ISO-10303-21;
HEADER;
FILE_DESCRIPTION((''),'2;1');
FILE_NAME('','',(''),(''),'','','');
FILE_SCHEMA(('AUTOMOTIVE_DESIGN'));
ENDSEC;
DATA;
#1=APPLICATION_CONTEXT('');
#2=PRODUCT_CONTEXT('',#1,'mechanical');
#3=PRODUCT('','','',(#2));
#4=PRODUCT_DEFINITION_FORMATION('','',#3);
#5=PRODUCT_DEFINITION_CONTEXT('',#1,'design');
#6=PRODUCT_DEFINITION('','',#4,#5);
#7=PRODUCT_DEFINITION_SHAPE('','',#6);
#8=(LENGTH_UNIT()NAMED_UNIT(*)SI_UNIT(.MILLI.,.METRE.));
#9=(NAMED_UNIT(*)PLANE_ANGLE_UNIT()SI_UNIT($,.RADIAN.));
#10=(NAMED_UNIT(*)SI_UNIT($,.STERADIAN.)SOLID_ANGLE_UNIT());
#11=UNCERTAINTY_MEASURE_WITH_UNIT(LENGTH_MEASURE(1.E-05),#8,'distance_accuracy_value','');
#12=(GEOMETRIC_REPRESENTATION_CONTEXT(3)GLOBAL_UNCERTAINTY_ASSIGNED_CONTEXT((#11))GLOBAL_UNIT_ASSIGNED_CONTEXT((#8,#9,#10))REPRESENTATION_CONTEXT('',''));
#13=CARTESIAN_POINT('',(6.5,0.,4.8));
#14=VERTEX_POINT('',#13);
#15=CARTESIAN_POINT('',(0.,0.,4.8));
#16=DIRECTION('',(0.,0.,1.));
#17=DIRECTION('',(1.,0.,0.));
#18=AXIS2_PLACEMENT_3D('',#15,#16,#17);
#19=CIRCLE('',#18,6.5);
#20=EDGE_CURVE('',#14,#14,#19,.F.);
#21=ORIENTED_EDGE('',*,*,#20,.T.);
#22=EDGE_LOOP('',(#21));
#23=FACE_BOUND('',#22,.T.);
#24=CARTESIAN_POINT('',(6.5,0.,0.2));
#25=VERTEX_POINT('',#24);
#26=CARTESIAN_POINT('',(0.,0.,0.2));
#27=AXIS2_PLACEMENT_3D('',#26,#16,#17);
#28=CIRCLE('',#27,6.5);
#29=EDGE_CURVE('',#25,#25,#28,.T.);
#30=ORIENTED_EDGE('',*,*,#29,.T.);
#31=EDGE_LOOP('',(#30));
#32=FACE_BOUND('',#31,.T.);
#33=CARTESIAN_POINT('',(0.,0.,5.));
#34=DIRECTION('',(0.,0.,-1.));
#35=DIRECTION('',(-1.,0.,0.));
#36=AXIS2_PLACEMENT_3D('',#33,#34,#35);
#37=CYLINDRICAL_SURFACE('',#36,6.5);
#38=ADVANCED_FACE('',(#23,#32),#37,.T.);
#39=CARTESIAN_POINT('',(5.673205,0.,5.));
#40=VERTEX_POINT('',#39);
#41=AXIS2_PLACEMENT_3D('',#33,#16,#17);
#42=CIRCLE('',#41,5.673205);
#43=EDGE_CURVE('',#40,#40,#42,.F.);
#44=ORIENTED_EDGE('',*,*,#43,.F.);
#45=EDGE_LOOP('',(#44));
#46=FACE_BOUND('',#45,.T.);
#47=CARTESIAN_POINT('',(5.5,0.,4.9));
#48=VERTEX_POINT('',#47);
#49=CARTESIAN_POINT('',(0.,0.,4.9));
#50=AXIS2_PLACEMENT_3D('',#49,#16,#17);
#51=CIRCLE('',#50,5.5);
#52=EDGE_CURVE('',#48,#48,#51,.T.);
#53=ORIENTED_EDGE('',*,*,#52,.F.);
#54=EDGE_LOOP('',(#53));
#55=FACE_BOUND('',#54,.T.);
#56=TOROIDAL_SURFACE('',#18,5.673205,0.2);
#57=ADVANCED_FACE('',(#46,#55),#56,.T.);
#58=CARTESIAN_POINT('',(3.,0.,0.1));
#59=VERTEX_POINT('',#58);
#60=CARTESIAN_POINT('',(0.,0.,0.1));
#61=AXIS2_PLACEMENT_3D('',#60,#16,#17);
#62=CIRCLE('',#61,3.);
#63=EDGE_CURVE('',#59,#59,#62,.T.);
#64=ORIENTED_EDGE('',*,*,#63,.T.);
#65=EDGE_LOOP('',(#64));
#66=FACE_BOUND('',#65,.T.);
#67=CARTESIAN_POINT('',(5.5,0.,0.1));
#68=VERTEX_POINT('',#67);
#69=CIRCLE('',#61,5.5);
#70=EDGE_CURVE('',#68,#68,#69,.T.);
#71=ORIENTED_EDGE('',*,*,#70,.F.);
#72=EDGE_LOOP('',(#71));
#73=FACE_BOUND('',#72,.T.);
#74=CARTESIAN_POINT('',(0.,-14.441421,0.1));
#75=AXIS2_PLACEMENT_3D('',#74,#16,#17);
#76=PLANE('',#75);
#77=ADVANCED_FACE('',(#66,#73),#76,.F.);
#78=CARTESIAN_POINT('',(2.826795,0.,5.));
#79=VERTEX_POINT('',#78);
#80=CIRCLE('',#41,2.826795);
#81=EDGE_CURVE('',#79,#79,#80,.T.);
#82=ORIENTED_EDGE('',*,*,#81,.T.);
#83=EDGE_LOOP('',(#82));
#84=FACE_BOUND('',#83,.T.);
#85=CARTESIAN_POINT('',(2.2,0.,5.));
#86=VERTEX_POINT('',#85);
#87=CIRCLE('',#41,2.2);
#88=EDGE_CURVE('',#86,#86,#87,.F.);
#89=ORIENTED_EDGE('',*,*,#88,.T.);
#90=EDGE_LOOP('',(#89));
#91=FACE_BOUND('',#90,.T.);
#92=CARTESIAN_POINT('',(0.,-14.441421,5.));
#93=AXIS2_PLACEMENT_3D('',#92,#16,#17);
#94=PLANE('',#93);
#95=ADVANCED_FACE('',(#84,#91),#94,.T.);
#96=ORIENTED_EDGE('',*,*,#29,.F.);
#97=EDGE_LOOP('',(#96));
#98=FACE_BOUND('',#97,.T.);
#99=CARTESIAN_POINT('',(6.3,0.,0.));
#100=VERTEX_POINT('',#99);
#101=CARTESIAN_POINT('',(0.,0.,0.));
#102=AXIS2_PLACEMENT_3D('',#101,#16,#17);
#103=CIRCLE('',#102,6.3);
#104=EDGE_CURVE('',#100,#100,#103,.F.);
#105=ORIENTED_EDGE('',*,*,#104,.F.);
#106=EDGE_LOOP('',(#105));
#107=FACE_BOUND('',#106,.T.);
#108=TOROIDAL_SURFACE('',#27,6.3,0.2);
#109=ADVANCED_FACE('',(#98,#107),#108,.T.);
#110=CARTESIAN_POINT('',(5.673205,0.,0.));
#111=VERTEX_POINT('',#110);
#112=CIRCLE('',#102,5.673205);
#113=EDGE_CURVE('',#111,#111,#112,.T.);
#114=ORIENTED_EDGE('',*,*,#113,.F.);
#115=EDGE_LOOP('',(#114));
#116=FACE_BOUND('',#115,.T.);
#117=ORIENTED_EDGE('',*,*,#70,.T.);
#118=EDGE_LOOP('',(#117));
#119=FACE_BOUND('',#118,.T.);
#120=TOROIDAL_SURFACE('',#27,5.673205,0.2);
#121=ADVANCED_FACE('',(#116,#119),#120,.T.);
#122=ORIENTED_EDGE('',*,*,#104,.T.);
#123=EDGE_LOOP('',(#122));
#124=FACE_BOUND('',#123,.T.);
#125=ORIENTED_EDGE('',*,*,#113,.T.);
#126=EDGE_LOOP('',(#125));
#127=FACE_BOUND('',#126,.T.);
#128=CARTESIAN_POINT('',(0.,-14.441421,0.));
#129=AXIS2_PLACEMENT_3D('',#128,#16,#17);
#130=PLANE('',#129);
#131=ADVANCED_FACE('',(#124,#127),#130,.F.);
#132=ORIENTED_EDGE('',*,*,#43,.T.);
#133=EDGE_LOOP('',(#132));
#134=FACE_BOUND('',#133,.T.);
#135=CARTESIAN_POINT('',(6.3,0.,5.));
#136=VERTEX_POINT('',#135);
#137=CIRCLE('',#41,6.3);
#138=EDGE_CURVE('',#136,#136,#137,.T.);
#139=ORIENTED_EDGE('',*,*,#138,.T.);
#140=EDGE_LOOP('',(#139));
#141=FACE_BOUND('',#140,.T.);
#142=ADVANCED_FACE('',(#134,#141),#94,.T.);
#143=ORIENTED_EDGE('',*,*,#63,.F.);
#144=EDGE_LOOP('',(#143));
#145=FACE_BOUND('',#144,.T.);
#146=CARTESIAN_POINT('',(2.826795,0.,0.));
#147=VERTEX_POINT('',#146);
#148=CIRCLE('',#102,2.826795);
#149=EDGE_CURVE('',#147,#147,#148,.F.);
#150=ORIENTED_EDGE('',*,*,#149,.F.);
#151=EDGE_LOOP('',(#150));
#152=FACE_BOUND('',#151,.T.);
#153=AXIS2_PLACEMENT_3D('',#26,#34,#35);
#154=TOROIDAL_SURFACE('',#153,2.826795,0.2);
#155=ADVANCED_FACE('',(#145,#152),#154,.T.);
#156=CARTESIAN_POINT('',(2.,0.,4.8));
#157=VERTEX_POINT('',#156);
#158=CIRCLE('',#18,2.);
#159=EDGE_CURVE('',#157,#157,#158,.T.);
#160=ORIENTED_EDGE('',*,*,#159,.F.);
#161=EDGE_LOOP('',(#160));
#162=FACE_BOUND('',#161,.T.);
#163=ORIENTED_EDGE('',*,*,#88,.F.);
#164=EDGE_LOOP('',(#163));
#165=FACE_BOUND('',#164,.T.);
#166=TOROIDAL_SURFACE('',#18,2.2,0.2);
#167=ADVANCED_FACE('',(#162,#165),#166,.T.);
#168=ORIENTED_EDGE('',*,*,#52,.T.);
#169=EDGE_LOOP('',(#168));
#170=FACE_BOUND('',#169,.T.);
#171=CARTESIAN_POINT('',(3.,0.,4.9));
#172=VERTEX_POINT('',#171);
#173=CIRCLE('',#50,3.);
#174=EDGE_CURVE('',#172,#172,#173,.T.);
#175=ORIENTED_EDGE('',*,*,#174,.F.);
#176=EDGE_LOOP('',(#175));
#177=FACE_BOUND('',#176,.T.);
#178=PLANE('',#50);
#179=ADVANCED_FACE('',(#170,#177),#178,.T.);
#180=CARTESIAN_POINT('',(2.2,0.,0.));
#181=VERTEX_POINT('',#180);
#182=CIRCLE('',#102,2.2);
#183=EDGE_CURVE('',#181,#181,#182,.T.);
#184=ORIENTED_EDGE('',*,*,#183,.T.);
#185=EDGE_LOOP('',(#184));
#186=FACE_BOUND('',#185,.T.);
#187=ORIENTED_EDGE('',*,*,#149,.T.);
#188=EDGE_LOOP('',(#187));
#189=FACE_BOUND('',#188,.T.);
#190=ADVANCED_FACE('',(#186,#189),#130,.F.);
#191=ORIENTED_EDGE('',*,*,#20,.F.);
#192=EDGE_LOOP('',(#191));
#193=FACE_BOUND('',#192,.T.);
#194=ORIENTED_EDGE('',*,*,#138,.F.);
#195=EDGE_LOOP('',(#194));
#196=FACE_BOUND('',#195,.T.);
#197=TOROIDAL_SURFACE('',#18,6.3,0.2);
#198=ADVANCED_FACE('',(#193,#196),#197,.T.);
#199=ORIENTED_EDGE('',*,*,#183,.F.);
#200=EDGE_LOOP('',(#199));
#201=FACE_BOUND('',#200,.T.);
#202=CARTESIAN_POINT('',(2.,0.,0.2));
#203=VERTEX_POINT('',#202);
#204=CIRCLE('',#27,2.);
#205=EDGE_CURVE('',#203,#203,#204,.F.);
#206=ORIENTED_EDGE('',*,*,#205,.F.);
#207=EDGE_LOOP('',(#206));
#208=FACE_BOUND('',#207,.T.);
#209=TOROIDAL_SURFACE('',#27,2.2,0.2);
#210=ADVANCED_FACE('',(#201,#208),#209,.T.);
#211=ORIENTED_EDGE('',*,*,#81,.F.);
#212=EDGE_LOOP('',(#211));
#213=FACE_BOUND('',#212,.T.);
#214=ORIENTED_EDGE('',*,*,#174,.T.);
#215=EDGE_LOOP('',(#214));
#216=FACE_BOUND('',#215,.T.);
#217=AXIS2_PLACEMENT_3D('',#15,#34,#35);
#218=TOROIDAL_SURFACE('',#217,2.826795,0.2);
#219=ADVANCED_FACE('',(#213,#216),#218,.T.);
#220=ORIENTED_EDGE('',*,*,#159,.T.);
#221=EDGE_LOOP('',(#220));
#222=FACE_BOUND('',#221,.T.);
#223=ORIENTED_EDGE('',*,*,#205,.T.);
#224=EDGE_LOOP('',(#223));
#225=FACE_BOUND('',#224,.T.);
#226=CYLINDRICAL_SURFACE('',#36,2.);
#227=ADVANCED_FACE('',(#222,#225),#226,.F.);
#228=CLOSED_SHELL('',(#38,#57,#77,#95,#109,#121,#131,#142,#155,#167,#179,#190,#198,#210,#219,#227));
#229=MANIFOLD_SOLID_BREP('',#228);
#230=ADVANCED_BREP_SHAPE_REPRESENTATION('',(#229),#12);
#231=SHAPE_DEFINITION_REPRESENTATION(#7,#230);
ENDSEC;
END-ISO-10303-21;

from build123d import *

# Parameters (mm, degrees)
ESQUISSE1_R             = 6.5
ESQUISSE1_R_2           = 5.5
ESQUISSE1_R_3           = 3
ESQUISSE1_R_4           = 2
BOSS_EXTRU_1_DEPTH      = 5
ESQUISSE1_3_R           = 5.5
ESQUISSE1_3_R_2         = 3
ENL_V_MAT_EXTRU_1_DEPTH = 0.1
ENL_V_START             = -0.1
ESQUISSE2_R             = 5.5
ESQUISSE2_R_2           = 3
ENL_V_MAT_EXTRU_2_DEPTH = 0.1
CONG_1_R                = 0.2


with BuildPart() as part:
    # Esquisse1 → Boss.-Extru.1 (new body)
    # profile 1 of 3: a face of its own
    with BuildSketch(Plane.XY):
        Circle(ESQUISSE1_R)
        Circle(ESQUISSE1_R_2, mode=Mode.SUBTRACT)
    # profile 2 of 3: a face of its own
    with BuildSketch(Plane.XY):
        Circle(ESQUISSE1_R_2)
        Circle(ESQUISSE1_R_3, mode=Mode.SUBTRACT)
    # profile 3 of 3: a face of its own
    with BuildSketch(Plane.XY):
        Circle(ESQUISSE1_R_3)
        Circle(ESQUISSE1_R_4, mode=Mode.SUBTRACT)
    extrude(amount=BOSS_EXTRU_1_DEPTH)

    # Esquisse1<3> → Enlèv. mat.-Extru.1 (cut)
    with BuildSketch(Plane.XY):
        Circle(ESQUISSE1_3_R)
        Circle(ESQUISSE1_3_R_2, mode=Mode.SUBTRACT)
    extrude(amount=ENL_V_MAT_EXTRU_1_DEPTH, mode=Mode.SUBTRACT)

    # Esquisse2 → Enlèv. mat.-Extru.2 (cut)
    with BuildSketch(Plane.XY.offset(5).offset(ENL_V_START)):
        Circle(ESQUISSE2_R)
        Circle(ESQUISSE2_R_2, mode=Mode.SUBTRACT)
    extrude(amount=ENL_V_MAT_EXTRU_2_DEPTH, mode=Mode.SUBTRACT)

    # Congé1
    # the kernel refuses this fillet: 0.2 mm, written as the material it takes off along each edge
    with BuildSketch(Plane(origin=(0, 0, 0), x_dir=(1, 0, 0), z_dir=(0, -1, 0))) as cong_1_piece_1:
        with BuildLine():
            CenterArc((5.673205081, 0.2), CONG_1_R, 210, 60)
            Line((5.5, 0.1), (5.496535898, 0.098))
            ThreePointArc((5.496535898, 0.098), (5.496, 0.05), (5.496, 0))
            Line((5.496, 0), (5.5, -0.004))
            Line((5.5, -0.004), (5.673205081, -0.004))
            Line((5.673205081, -0.004), (5.673205081, 0))
        make_face()
    revolve(axis=Axis((0, 0, 0), (0, 0, 1)), mode=Mode.SUBTRACT)
    with BuildSketch(Plane(origin=(0, 0, 0), x_dir=(1, 0, 0), z_dir=(0, -1, 0))) as cong_1_piece_2:
        with BuildLine():
            CenterArc((2.826794919, 0.2), CONG_1_R, 270, 60)
            Line((2.826794919, 0), (2.826794919, -0.004))
            Line((2.826794919, -0.004), (3, -0.004))
            Line((3, -0.004), (3.004, 0))
            ThreePointArc((3.004, 0), (3.004, 0.05), (3.003464102, 0.098))
            Line((3.003464102, 0.098), (3, 0.1))
        make_face()
    revolve(axis=Axis((0, 0, 0), (0, 0, 1)), mode=Mode.SUBTRACT)
    with BuildSketch(Plane(origin=(0, 0, 5), x_dir=(1, 0, 0), z_dir=(0, -1, 0))) as cong_1_piece_3:
        with BuildLine():
            CenterArc((5.673205081, -0.2), CONG_1_R, 90, 60)
            Line((5.5, -0.1), (5.496535898, -0.098))
            ThreePointArc((5.496535898, -0.098), (5.496, -0.05), (5.496, 0))
            Line((5.496, 0), (5.5, 0.004))
            Line((5.5, 0.004), (5.673205081, 0.004))
            Line((5.673205081, 0.004), (5.673205081, 0))
        make_face()
    revolve(axis=Axis((0, 0, 5), (0, 0, 1)), mode=Mode.SUBTRACT)
    with BuildSketch(Plane(origin=(0, 0, 5), x_dir=(1, 0, 0), z_dir=(0, -1, 0))) as cong_1_piece_4:
        with BuildLine():
            CenterArc((2.826794919, -0.2), CONG_1_R, 30, 60)
            Line((2.826794919, 0), (2.826794919, 0.004))
            Line((2.826794919, 0.004), (3, 0.004))
            Line((3, 0.004), (3.004, 0))
            ThreePointArc((3.004, 0), (3.004, -0.05), (3.003464102, -0.098))
            Line((3.003464102, -0.098), (3, -0.1))
        make_face()
    revolve(axis=Axis((0, 0, 5), (0, 0, 1)), mode=Mode.SUBTRACT)
    with BuildSketch(Plane(origin=(0, 0, 0), x_dir=(1, 0, 0), z_dir=(0, -1, 0))) as cong_1_piece_5:
        with BuildLine():
            CenterArc((2 + CONG_1_R, CONG_1_R), CONG_1_R, 180, 90)
            Line((2, CONG_1_R), (2 - CONG_1_R * 0.02, CONG_1_R))
            Line((2 - CONG_1_R * 0.02, CONG_1_R), (2 - CONG_1_R * 0.02, -CONG_1_R * 0.02))
            Line((2 - CONG_1_R * 0.02, -CONG_1_R * 0.02), (2 + CONG_1_R, -CONG_1_R * 0.02))
            Line((2 + CONG_1_R, -CONG_1_R * 0.02), (2 + CONG_1_R, 0))
        make_face()
    revolve(axis=Axis((0, 0, 0), (0, 0, 1)), mode=Mode.SUBTRACT)
    with BuildSketch(Plane(origin=(0, 0, 0), x_dir=(1, 0, 0), z_dir=(0, -1, 0))) as cong_1_piece_6:
        with BuildLine():
            CenterArc((6.5 - CONG_1_R, CONG_1_R), CONG_1_R, 270, 90)
            Line((6.5 - CONG_1_R, 0), (6.5 - CONG_1_R, -CONG_1_R * 0.02))
            Line((6.5 - CONG_1_R, -CONG_1_R * 0.02), (6.5 + CONG_1_R * 0.02, -CONG_1_R * 0.02))
            Line((6.5 + CONG_1_R * 0.02, -CONG_1_R * 0.02), (6.5 + CONG_1_R * 0.02, CONG_1_R))
            Line((6.5 + CONG_1_R * 0.02, CONG_1_R), (6.5, CONG_1_R))
        make_face()
    revolve(axis=Axis((0, 0, 0), (0, 0, 1)), mode=Mode.SUBTRACT)
    with BuildSketch(Plane(origin=(0, 0, 5), x_dir=(1, 0, 0), z_dir=(0, -1, 0))) as cong_1_piece_7:
        with BuildLine():
            CenterArc((6.5 - CONG_1_R, -CONG_1_R), CONG_1_R, 0, 90)
            Line((6.5 - CONG_1_R, 0), (6.5 - CONG_1_R, CONG_1_R * 0.02))
            Line((6.5 - CONG_1_R, CONG_1_R * 0.02), (6.5 + CONG_1_R * 0.02, CONG_1_R * 0.02))
            Line((6.5 + CONG_1_R * 0.02, CONG_1_R * 0.02), (6.5 + CONG_1_R * 0.02, -CONG_1_R))
            Line((6.5 + CONG_1_R * 0.02, -CONG_1_R), (6.5, -CONG_1_R))
        make_face()
    revolve(axis=Axis((0, 0, 5), (0, 0, 1)), mode=Mode.SUBTRACT)
    with BuildSketch(Plane(origin=(0, 0, 5), x_dir=(1, 0, 0), z_dir=(0, -1, 0))) as cong_1_piece_8:
        with BuildLine():
            CenterArc((2 + CONG_1_R, -CONG_1_R), CONG_1_R, 90, 90)
            Line((2, -CONG_1_R), (2 - CONG_1_R * 0.02, -CONG_1_R))
            Line((2 - CONG_1_R * 0.02, -CONG_1_R), (2 - CONG_1_R * 0.02, CONG_1_R * 0.02))
            Line((2 - CONG_1_R * 0.02, CONG_1_R * 0.02), (2 + CONG_1_R, CONG_1_R * 0.02))
            Line((2 + CONG_1_R, CONG_1_R * 0.02), (2 + CONG_1_R, 0))
        make_face()
    revolve(axis=Axis((0, 0, 5), (0, 0, 1)), mode=Mode.SUBTRACT)


solid = part.part
